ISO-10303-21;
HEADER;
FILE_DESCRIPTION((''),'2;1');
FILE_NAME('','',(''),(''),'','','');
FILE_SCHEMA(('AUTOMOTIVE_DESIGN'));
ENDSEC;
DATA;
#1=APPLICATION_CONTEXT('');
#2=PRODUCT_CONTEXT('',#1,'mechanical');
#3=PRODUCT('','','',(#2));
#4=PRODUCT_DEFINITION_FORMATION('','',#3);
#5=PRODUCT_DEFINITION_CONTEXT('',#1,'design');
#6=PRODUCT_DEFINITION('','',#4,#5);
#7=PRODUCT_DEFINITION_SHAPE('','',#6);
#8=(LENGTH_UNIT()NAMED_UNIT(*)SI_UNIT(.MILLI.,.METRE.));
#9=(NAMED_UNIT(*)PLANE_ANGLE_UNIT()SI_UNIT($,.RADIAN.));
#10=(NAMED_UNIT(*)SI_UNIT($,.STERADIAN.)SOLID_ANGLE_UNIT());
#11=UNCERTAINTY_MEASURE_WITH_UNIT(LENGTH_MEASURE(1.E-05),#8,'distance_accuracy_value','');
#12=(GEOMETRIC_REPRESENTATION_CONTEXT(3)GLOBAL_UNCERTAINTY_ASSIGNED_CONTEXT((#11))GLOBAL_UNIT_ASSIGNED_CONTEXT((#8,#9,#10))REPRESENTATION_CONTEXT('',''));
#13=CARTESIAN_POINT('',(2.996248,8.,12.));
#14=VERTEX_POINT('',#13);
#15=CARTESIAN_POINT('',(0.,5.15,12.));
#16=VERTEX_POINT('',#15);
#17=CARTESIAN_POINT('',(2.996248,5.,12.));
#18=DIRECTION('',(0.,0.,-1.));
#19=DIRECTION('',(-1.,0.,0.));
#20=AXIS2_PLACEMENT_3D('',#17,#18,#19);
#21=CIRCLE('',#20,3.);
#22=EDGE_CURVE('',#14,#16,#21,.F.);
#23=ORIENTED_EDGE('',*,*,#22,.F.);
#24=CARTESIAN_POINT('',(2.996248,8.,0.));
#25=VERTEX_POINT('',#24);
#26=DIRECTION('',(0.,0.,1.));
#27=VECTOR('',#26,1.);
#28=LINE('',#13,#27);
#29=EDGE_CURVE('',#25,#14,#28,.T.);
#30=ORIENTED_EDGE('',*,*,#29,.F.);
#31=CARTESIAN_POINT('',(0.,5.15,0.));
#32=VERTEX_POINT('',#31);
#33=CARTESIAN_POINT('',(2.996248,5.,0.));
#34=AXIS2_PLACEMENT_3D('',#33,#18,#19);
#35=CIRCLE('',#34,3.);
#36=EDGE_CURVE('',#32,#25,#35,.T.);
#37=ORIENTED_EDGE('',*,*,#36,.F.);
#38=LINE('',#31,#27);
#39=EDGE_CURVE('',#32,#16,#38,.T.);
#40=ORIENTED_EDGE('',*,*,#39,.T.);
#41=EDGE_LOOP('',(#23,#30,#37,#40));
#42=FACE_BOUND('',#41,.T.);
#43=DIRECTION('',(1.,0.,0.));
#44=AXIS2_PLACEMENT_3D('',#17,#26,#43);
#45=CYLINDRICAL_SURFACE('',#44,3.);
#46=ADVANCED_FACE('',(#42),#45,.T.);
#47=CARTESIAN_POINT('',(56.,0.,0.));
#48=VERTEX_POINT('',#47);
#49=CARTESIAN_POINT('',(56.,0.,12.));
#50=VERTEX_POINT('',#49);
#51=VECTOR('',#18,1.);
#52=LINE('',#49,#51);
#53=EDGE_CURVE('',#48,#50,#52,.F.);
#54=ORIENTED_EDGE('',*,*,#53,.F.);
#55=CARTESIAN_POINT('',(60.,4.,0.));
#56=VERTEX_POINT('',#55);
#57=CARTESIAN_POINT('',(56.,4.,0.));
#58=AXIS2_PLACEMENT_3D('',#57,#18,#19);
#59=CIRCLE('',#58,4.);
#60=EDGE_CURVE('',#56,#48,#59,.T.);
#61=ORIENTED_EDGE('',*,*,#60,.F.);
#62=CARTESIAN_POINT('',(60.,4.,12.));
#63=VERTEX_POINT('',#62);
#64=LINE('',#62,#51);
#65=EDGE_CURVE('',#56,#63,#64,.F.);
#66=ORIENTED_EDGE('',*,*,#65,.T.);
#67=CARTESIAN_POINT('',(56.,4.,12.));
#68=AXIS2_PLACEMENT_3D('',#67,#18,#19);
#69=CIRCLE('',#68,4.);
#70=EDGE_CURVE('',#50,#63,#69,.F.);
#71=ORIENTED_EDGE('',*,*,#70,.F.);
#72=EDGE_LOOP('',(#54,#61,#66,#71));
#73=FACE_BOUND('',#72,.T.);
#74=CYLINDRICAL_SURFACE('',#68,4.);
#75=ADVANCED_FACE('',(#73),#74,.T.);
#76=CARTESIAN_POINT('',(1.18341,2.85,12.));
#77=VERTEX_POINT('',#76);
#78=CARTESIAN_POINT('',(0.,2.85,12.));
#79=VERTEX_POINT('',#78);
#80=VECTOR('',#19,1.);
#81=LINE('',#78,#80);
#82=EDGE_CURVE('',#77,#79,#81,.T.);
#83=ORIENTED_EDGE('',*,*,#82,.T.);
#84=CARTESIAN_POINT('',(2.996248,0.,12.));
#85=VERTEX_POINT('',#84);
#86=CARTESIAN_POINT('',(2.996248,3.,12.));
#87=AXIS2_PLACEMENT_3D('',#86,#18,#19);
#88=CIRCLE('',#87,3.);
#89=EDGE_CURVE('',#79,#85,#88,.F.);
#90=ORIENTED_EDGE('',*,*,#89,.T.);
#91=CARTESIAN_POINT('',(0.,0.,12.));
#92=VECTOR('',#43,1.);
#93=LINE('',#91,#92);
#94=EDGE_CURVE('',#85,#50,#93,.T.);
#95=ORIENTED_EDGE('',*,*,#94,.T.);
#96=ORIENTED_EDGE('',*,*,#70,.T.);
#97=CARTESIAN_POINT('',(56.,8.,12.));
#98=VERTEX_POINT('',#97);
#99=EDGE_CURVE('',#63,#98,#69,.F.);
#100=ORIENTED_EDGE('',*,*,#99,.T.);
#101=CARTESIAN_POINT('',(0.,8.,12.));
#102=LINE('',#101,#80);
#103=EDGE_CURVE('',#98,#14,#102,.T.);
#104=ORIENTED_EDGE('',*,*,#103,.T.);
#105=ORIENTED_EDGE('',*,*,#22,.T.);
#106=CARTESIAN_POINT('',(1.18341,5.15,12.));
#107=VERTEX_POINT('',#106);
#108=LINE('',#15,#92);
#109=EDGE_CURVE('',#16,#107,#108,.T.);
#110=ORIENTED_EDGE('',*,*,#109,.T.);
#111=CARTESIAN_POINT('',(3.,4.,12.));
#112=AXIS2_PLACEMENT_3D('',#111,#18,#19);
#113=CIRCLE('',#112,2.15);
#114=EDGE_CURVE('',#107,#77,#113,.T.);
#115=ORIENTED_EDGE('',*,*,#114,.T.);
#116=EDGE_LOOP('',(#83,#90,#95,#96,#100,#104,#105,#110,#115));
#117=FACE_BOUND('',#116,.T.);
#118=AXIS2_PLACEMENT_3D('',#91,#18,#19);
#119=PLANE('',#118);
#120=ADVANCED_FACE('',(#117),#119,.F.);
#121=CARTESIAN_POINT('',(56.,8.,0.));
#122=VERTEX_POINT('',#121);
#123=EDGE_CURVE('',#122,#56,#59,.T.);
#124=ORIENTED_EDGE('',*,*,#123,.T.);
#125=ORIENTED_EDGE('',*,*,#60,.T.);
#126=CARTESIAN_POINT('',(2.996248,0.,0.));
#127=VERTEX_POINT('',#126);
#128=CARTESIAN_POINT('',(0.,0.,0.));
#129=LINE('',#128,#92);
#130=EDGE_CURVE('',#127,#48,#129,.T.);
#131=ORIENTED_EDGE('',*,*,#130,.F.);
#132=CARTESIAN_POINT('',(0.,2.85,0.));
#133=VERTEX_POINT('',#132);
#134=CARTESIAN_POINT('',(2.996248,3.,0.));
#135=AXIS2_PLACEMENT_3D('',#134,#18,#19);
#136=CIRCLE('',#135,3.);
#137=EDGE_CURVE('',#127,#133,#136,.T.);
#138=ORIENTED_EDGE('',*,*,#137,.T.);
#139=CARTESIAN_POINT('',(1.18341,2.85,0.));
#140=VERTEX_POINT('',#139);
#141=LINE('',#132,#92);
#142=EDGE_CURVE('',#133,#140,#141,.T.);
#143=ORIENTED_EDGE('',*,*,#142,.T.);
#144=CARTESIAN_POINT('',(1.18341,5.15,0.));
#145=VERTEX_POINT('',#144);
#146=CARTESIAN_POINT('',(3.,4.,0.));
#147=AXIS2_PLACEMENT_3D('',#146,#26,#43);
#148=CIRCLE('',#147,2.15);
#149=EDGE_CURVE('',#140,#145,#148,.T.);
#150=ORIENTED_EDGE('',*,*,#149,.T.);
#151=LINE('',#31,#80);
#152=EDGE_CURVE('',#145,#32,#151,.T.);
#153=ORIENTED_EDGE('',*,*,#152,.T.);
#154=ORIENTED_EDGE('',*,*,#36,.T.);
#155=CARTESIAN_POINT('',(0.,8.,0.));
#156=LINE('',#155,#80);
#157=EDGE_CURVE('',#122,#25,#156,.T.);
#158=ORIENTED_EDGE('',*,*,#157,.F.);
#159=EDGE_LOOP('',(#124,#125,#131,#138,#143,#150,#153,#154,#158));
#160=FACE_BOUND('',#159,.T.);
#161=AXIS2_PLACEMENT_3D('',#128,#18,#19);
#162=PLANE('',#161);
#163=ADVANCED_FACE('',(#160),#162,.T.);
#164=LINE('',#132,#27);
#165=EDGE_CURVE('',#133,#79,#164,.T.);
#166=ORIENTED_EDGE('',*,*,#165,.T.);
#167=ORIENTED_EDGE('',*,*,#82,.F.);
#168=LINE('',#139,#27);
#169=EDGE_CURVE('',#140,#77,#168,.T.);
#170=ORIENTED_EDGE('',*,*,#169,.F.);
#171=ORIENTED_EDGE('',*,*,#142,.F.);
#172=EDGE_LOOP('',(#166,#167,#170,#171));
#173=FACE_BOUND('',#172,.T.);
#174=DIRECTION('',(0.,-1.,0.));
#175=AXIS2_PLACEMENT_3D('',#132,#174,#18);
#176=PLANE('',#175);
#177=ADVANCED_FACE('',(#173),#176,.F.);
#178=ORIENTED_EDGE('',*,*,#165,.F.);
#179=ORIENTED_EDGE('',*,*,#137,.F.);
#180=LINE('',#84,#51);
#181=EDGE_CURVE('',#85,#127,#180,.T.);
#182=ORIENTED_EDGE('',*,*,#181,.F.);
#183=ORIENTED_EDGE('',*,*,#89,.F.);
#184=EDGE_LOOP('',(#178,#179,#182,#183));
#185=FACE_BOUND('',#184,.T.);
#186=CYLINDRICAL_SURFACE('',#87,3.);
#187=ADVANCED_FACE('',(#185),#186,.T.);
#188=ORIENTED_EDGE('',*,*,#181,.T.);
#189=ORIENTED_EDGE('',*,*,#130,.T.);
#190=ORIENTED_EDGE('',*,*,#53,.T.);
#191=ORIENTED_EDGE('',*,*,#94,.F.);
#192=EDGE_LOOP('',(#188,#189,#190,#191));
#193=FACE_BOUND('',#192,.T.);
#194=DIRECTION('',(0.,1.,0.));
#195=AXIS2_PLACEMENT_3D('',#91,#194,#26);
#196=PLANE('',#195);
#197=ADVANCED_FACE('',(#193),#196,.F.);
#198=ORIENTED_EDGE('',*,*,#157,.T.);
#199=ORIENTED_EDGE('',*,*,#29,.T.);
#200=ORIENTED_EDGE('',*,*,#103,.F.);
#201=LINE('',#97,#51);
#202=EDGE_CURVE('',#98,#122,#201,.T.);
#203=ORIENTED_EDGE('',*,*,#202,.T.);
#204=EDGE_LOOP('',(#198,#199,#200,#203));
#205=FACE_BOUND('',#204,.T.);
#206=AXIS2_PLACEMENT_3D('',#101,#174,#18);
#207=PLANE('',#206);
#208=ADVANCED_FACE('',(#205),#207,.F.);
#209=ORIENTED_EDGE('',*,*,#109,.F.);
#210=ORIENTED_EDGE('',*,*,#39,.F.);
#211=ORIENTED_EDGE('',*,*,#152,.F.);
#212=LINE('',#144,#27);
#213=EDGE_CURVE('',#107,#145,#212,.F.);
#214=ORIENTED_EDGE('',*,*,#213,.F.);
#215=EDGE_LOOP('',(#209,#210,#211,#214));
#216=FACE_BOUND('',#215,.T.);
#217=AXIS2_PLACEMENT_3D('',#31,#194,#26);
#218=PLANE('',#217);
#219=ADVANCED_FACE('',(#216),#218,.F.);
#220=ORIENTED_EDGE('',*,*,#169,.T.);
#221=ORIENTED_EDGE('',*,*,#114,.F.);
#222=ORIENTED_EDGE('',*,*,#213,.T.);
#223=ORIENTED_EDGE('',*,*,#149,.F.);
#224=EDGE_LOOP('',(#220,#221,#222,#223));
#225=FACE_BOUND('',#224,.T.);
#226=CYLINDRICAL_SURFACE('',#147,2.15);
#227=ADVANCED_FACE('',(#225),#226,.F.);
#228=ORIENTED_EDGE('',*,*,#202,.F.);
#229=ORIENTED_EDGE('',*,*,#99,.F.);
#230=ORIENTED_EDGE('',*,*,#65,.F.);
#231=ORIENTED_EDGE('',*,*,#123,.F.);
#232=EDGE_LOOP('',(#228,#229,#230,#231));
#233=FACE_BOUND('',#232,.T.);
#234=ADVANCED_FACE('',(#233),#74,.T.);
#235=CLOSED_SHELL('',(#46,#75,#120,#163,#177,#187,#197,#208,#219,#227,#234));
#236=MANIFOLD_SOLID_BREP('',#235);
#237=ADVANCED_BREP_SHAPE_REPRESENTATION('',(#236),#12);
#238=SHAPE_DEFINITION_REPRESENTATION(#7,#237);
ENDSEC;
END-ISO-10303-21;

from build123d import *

# Parameters (mm, degrees)
ESQUISSE1_W                  = 60
ESQUISSE1_H                  = 8
BOSS_EXTRU_1_DEPTH           = 12
ENL_V_MAT_EXTRU_1_DEPTH      = 62.708994482
ENL_V_MAT_EXTRU_1_DEPTH_BACK = 62.708994482
ESQUISSE2_R                  = 2.15
ENL_V_MAT_EXTRU_2_DEPTH      = 62.708994482
ENL_V_MAT_EXTRU_2_DEPTH_BACK = 62.708994482
ESQUISSE3_W                  = 2
ESQUISSE3_H                  = 2.3
CONG_1_R                     = 4
CONG_2_R                     = 3


# Some blends are built 0.0001 mm under size
with BuildPart() as part:
    # Esquisse1 → Boss.-Extru.1 (new body)
    with BuildSketch(Plane.XY):
        with Locations((30, 4)):
            Rectangle(ESQUISSE1_W, ESQUISSE1_H)
    extrude(amount=BOSS_EXTRU_1_DEPTH)

    # Esquisse2 → Enlèv. mat.-Extru.1 (cut, two sides: drawn at the far end of the back side and taken through both)
    with BuildSketch(Plane.XY.offset(12).offset(-ENL_V_MAT_EXTRU_1_DEPTH_BACK)):
        with Locations((3, 4)):
            Circle(ESQUISSE2_R)
    extrude(amount=ENL_V_MAT_EXTRU_1_DEPTH + ENL_V_MAT_EXTRU_1_DEPTH_BACK, mode=Mode.SUBTRACT)

    # Esquisse3 → Enlèv. mat.-Extru.2 (cut, two sides: drawn at the far end of the back side and taken through both)
    with BuildSketch(Plane.XY.offset(12).offset(-ENL_V_MAT_EXTRU_2_DEPTH_BACK)):
        with Locations((1, 4)):
            Rectangle(ESQUISSE3_W, ESQUISSE3_H)
    extrude(amount=ENL_V_MAT_EXTRU_2_DEPTH + ENL_V_MAT_EXTRU_2_DEPTH_BACK, mode=Mode.SUBTRACT)

    # Congé1
    cong_1_edges = [part.edges().sort_by_distance(p)[0] for p in [
        (60, 0, 6),
        (60, 8, 6),
    ]]
    fillet(cong_1_edges, radius=CONG_1_R - 0.0001)  # a hair under: the kernel refuses the full size

    # Congé2
    # the kernel refuses this fillet: 3 mm, written as the material it takes off along each edge
    with BuildSketch(Plane(origin=(0, 0, -7.490619133), x_dir=(1, 0, 0), z_dir=(0, 0, 1))) as cong_2_piece_1:
        with BuildLine():
            CenterArc((2.996247653, 3), CONG_2_R, 182.865983983, 87.134016017)
            Line((0, 2.85), (-0.059924953, 2.847))
            ThreePointArc((-0.059924953, 2.847), (-0.06, 1.425), (-0.06, 0))
            Line((-0.06, 0), (0, -0.06))
            Line((0, -0.06), (2.996247653, -0.06))
            Line((2.996247653, -0.06), (2.996247653, 0))
        make_face()
    extrude(amount=26.981238267, mode=Mode.SUBTRACT)
    with BuildSketch(Plane(origin=(0, 8, -7.490619133), x_dir=(1, 0, 0), z_dir=(0, 0, 1))) as cong_2_piece_2:
        with BuildLine():
            CenterArc((2.996247653, -3), CONG_2_R, 90, 87.134016017)
            Line((0, -2.85), (-0.059924953, -2.847))
            ThreePointArc((-0.059924953, -2.847), (-0.06, -1.425), (-0.06, 0))
            Line((-0.06, 0), (0, 0.06))
            Line((0, 0.06), (2.996247653, 0.06))
            Line((2.996247653, 0.06), (2.996247653, 0))
        make_face()
    extrude(amount=26.981238267, mode=Mode.SUBTRACT)


solid = part.part
